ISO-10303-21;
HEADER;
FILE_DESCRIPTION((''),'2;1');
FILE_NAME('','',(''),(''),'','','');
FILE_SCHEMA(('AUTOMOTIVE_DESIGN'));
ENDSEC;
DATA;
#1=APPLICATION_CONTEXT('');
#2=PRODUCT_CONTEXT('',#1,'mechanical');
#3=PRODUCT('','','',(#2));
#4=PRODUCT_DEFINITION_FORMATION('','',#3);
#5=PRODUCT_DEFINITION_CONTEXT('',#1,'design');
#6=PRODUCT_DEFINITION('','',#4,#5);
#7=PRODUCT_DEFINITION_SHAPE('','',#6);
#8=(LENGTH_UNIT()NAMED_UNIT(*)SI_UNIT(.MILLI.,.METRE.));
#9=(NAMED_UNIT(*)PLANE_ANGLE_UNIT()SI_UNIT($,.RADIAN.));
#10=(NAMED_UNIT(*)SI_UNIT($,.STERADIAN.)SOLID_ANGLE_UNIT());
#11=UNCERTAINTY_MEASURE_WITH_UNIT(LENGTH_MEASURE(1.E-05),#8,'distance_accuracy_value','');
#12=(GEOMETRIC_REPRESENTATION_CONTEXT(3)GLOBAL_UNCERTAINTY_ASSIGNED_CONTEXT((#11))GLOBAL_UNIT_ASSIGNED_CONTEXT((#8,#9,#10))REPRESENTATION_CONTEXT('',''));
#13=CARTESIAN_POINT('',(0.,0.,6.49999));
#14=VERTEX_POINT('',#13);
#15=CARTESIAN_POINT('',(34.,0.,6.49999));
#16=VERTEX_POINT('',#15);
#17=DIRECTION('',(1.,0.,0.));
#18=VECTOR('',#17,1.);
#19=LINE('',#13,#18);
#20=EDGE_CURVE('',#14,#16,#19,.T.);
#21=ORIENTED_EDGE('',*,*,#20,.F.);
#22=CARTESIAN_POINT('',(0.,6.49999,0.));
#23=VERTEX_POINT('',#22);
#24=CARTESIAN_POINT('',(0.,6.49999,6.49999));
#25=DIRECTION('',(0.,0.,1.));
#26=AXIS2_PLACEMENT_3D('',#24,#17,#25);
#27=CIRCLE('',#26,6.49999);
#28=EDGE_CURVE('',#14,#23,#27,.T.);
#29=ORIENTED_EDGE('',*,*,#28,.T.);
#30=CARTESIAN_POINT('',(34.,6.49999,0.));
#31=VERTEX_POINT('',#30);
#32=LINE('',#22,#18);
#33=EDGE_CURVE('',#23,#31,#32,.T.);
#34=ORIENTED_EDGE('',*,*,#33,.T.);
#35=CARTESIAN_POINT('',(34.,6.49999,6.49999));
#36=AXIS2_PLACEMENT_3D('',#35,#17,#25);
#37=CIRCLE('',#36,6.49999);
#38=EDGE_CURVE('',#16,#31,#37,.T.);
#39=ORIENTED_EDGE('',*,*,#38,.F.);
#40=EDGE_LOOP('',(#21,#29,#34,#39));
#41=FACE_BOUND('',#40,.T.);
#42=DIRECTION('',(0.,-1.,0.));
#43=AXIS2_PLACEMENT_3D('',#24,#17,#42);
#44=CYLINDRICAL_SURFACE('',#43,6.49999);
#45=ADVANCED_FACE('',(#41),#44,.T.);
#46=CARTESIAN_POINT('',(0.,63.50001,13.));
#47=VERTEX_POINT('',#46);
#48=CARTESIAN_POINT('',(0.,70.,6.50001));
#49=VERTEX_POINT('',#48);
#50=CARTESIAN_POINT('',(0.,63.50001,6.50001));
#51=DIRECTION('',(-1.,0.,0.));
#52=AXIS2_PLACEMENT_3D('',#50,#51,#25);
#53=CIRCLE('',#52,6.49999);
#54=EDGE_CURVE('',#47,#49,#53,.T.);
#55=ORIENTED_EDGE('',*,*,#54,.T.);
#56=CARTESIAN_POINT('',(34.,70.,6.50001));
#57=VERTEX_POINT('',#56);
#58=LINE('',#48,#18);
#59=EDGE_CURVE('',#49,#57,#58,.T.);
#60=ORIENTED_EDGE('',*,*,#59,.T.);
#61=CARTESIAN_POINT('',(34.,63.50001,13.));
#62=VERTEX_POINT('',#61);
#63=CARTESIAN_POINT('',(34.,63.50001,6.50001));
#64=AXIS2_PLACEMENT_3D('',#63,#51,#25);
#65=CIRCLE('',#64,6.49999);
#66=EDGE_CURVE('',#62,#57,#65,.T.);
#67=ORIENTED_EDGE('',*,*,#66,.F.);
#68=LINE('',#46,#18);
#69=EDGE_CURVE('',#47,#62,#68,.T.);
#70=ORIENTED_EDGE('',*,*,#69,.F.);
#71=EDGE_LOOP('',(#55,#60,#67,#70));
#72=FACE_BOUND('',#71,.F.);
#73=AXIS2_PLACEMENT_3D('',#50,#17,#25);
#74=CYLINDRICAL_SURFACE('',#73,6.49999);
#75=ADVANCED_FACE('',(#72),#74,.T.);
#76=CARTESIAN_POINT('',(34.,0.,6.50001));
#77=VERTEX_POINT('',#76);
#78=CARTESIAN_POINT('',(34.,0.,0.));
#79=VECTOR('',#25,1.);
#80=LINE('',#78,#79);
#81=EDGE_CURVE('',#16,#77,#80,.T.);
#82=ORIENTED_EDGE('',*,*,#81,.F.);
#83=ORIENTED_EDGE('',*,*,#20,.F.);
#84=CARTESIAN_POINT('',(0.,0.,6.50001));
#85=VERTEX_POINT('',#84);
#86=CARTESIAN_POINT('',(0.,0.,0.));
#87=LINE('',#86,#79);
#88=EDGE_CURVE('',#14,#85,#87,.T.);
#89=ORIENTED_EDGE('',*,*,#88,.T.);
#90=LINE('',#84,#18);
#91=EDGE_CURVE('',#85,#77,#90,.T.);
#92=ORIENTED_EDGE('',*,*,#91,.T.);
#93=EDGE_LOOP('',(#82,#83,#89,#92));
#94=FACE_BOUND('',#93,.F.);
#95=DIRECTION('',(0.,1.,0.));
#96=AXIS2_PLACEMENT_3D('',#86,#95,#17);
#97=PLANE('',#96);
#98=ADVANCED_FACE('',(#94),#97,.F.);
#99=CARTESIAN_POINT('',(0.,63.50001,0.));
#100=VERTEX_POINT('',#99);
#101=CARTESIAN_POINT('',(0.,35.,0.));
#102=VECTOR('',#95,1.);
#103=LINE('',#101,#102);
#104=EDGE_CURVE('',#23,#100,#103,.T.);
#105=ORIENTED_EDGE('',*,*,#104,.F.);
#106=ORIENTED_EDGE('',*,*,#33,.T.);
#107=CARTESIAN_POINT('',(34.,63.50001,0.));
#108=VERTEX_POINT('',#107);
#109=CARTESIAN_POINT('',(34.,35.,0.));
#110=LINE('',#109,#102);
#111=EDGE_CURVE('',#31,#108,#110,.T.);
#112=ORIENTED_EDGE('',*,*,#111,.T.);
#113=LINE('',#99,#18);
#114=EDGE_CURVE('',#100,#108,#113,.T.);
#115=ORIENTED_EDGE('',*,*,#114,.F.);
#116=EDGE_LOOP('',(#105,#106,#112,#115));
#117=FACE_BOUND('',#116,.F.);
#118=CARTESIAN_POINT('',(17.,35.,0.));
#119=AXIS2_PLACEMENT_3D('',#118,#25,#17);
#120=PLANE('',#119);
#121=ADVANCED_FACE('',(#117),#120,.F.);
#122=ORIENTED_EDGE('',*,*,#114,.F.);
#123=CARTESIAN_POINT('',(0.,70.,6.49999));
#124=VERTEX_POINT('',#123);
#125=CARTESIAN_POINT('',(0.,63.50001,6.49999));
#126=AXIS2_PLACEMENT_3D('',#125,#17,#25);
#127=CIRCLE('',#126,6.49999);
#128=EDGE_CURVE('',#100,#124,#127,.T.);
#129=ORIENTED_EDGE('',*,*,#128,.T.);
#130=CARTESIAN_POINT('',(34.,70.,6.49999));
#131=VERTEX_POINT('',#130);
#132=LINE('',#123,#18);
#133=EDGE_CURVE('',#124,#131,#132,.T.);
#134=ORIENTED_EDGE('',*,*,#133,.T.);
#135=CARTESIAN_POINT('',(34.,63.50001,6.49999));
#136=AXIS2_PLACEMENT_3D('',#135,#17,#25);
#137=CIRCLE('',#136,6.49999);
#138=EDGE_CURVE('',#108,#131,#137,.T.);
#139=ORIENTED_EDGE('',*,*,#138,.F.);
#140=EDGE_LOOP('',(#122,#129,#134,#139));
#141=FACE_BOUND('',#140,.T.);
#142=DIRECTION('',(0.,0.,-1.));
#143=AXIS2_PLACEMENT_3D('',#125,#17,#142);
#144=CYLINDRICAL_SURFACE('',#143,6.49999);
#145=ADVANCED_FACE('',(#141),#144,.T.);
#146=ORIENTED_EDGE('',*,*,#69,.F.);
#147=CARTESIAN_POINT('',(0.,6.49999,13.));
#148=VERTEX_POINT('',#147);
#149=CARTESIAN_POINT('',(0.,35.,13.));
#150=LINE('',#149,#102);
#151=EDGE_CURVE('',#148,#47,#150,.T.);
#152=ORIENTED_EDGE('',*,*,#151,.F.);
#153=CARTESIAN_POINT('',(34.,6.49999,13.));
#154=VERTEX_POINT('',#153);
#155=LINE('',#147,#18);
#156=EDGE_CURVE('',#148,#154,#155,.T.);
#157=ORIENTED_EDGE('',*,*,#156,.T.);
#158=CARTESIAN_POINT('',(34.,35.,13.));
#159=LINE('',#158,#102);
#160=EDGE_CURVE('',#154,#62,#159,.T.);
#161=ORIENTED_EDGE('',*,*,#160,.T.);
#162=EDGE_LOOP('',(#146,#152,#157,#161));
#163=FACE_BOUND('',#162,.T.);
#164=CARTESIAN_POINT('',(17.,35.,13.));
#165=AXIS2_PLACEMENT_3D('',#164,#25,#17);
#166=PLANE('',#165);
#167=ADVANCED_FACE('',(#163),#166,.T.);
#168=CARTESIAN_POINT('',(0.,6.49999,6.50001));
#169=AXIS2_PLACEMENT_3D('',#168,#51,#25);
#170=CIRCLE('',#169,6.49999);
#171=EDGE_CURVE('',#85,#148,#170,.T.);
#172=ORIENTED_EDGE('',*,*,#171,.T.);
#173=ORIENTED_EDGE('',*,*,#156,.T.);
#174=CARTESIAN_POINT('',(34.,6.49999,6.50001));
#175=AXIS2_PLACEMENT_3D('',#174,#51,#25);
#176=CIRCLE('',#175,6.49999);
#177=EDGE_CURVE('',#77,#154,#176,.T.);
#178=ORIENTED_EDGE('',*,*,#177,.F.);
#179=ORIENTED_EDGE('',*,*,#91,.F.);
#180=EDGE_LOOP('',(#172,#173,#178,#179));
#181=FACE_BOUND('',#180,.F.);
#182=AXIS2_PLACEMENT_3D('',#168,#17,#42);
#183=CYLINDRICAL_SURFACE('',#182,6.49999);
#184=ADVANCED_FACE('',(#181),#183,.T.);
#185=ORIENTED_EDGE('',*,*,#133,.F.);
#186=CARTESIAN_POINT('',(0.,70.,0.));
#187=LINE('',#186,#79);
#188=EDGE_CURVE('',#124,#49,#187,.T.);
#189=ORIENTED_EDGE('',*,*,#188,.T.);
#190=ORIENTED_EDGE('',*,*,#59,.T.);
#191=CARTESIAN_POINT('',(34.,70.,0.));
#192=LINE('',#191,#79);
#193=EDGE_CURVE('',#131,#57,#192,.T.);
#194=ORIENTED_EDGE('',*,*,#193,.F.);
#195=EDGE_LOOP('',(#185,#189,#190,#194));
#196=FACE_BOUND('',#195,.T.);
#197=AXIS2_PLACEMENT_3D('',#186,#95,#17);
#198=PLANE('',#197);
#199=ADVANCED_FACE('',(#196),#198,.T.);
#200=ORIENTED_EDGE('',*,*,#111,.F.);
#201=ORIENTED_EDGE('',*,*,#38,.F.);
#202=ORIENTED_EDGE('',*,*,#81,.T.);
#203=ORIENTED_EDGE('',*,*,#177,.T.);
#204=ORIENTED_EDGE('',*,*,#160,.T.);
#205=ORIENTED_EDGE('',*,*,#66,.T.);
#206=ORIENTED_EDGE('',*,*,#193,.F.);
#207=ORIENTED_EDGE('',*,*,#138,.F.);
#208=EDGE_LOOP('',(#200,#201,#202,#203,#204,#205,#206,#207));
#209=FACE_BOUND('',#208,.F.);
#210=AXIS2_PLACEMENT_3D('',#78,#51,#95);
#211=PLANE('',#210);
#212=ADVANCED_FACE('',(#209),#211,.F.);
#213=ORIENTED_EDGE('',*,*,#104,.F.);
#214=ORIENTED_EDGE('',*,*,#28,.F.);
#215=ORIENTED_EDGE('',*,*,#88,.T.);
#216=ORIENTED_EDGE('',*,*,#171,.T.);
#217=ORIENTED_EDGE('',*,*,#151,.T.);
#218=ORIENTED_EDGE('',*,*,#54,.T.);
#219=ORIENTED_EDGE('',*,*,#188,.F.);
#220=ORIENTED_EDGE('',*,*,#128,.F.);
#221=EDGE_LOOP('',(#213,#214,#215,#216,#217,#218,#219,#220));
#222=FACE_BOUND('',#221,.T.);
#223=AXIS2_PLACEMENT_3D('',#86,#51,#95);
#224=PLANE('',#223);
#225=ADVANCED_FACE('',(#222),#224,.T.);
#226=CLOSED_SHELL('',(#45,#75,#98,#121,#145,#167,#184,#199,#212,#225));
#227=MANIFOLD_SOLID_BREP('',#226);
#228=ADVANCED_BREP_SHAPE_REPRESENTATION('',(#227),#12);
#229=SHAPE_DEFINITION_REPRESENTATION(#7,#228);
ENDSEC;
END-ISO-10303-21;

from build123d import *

# Parameters (mm, degrees)
F0_W     = 34
F0_H     = 70
F1_DEPTH = 13
F2_R     = 6.49999
F3_R     = 6.49999


# Not quite as in the source:
# - a fillet or chamfer is up to 0.001 mm smaller than in the source, because OpenCascade refuses the exact size


with BuildPart() as f1:
    # F0 (on Top) → F1 (new body)
    with BuildSketch(Plane.XY):
        with Locations((17, 35)):
            Rectangle(F0_W, F0_H)
    extrude(amount=F1_DEPTH)

    # F2 (radius 6.5 in the source; OpenCascade refuses exactly that, so slightly less here)
    f2_edges = [f1.edges().sort_by_distance(p)[0] for p in [
        (17, 0, 13),
        (17, 0, 0),
    ]]
    fillet(f2_edges, radius=F2_R)

    # F3 (radius 6.5 in the source; OpenCascade refuses exactly that, so slightly less here)
    f3_edges = [f1.edges().sort_by_distance(p)[0] for p in [
        (17, 70, 13),
        (17, 70, 0),
    ]]
    fillet(f3_edges, radius=F3_R)


solid = f1.part
